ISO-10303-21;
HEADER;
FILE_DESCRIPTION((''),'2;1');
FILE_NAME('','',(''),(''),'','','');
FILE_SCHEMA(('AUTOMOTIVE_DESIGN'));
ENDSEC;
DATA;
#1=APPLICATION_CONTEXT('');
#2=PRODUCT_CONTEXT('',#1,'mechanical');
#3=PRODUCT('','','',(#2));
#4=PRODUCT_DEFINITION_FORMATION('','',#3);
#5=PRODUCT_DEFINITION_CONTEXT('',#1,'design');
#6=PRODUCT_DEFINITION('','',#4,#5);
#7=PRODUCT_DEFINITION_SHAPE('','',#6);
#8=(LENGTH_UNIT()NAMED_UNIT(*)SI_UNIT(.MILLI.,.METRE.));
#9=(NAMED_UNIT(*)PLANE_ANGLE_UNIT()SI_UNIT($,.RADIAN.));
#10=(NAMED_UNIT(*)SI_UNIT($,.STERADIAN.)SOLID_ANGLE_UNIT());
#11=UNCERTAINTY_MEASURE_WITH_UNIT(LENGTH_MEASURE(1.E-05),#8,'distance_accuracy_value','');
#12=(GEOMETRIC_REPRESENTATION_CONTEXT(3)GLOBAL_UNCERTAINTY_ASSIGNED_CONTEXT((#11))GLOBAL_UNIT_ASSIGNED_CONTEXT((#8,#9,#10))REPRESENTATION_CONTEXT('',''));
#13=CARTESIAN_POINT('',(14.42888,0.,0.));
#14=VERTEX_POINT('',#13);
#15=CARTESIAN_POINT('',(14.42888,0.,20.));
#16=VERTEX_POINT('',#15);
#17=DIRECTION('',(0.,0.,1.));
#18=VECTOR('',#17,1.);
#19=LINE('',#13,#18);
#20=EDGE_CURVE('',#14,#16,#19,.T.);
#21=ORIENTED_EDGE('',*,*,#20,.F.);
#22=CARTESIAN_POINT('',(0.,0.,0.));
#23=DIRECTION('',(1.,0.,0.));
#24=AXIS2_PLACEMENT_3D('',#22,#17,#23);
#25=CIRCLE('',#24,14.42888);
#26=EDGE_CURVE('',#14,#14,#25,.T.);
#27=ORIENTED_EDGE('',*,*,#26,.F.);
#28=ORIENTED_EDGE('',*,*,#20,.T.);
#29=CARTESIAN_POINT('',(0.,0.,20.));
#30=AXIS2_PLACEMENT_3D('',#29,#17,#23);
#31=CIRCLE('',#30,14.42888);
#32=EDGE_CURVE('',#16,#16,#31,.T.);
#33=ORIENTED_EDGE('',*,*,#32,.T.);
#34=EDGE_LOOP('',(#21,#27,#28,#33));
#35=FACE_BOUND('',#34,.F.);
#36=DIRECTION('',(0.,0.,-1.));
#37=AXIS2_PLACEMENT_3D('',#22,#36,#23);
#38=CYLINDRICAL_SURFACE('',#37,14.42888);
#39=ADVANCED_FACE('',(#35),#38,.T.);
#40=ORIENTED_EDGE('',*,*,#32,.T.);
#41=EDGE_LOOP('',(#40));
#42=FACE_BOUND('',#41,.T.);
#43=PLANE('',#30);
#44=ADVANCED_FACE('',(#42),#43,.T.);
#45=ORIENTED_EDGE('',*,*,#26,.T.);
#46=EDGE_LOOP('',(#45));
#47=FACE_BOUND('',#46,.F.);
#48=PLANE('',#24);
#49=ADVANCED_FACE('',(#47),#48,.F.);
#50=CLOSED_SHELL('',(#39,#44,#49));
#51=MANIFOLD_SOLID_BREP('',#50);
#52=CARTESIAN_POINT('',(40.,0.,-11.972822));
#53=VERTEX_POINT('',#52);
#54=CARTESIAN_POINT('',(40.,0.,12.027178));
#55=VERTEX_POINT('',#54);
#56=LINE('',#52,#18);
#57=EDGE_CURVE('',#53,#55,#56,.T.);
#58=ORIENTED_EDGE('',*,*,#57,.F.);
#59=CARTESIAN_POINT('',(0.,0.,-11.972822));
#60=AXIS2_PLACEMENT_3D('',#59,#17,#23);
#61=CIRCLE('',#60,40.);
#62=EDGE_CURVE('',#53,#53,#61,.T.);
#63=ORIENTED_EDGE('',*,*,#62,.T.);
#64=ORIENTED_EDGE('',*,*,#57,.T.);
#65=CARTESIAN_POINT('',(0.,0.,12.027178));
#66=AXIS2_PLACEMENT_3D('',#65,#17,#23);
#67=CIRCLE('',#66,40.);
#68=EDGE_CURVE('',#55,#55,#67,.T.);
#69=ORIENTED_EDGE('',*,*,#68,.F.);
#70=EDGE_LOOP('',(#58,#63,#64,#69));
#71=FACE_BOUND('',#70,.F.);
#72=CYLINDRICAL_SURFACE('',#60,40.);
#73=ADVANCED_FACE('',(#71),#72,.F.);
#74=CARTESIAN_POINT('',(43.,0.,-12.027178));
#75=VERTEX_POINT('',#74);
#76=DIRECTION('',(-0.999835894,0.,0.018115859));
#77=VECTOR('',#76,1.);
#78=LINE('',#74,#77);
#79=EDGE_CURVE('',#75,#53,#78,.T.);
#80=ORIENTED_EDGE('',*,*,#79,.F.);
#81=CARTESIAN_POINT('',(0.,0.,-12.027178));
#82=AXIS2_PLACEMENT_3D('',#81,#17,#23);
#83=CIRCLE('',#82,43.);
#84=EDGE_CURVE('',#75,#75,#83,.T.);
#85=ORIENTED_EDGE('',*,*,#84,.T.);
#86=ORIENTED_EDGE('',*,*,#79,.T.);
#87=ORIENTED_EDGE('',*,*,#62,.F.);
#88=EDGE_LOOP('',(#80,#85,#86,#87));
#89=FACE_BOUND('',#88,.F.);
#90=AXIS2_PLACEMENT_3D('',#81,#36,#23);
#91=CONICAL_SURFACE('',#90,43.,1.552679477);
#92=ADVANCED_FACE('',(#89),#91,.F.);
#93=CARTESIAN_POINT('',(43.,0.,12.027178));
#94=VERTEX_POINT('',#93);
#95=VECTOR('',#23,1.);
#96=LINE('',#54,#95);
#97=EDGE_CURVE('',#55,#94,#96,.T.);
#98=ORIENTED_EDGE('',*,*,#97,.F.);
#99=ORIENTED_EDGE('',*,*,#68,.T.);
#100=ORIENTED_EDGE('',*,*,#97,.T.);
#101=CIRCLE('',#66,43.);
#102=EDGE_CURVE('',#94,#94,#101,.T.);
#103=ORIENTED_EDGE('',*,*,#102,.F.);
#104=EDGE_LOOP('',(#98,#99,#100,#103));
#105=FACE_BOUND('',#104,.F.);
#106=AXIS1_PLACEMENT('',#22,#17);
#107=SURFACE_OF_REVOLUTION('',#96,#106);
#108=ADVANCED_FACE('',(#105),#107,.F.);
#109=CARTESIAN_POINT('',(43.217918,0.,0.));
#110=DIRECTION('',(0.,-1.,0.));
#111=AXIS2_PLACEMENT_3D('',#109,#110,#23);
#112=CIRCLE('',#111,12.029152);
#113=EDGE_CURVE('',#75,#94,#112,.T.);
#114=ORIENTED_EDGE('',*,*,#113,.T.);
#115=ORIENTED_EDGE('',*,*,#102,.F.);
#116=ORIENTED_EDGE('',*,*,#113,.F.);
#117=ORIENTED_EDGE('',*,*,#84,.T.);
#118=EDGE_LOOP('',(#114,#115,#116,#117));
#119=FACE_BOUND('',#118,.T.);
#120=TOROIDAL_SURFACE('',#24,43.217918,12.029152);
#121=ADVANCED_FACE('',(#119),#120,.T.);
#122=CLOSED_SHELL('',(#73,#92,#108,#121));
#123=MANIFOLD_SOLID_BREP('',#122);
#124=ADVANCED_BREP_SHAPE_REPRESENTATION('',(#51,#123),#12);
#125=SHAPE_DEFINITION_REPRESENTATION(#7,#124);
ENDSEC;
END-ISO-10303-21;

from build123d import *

# Parameters (mm, degrees)
F3_R     = 14.4288800287
F4_DEPTH = 20


# Not quite as in the source:
# - the program builds the solid bodies; features that only make, move or delete a surface that nothing else refers to are left out


with BuildPart() as f2:
    # F2: sweep along a path in F0
    with BuildLine(Plane.XY) as f2_path:
        CenterArc((0, 0), 40, 0, 360)
    # F1 (on Front) → F2 (sweep)
    with BuildSketch(Plane.XZ):
        with BuildLine():
            Line((-40, 12.0271782488), (-43, 12.0271782488))
            ThreePointArc((-43, 12.0271782488), (-55.2470707288, 0), (-43, -12.0271782488))
            Line((-43, -12.0271782488), (-40, -11.9728217512))
            Line((-40, -11.9728217512), (-40, 12.0271782488))
        make_face()
    sweep(path=f2_path.line)


with BuildPart() as f4:
    # F3 (on Top) → F4 (new body)
    with BuildSketch(Plane.XY):
        Circle(F3_R)
    extrude(amount=F4_DEPTH)


solid = Compound([f2.part, f4.part])
